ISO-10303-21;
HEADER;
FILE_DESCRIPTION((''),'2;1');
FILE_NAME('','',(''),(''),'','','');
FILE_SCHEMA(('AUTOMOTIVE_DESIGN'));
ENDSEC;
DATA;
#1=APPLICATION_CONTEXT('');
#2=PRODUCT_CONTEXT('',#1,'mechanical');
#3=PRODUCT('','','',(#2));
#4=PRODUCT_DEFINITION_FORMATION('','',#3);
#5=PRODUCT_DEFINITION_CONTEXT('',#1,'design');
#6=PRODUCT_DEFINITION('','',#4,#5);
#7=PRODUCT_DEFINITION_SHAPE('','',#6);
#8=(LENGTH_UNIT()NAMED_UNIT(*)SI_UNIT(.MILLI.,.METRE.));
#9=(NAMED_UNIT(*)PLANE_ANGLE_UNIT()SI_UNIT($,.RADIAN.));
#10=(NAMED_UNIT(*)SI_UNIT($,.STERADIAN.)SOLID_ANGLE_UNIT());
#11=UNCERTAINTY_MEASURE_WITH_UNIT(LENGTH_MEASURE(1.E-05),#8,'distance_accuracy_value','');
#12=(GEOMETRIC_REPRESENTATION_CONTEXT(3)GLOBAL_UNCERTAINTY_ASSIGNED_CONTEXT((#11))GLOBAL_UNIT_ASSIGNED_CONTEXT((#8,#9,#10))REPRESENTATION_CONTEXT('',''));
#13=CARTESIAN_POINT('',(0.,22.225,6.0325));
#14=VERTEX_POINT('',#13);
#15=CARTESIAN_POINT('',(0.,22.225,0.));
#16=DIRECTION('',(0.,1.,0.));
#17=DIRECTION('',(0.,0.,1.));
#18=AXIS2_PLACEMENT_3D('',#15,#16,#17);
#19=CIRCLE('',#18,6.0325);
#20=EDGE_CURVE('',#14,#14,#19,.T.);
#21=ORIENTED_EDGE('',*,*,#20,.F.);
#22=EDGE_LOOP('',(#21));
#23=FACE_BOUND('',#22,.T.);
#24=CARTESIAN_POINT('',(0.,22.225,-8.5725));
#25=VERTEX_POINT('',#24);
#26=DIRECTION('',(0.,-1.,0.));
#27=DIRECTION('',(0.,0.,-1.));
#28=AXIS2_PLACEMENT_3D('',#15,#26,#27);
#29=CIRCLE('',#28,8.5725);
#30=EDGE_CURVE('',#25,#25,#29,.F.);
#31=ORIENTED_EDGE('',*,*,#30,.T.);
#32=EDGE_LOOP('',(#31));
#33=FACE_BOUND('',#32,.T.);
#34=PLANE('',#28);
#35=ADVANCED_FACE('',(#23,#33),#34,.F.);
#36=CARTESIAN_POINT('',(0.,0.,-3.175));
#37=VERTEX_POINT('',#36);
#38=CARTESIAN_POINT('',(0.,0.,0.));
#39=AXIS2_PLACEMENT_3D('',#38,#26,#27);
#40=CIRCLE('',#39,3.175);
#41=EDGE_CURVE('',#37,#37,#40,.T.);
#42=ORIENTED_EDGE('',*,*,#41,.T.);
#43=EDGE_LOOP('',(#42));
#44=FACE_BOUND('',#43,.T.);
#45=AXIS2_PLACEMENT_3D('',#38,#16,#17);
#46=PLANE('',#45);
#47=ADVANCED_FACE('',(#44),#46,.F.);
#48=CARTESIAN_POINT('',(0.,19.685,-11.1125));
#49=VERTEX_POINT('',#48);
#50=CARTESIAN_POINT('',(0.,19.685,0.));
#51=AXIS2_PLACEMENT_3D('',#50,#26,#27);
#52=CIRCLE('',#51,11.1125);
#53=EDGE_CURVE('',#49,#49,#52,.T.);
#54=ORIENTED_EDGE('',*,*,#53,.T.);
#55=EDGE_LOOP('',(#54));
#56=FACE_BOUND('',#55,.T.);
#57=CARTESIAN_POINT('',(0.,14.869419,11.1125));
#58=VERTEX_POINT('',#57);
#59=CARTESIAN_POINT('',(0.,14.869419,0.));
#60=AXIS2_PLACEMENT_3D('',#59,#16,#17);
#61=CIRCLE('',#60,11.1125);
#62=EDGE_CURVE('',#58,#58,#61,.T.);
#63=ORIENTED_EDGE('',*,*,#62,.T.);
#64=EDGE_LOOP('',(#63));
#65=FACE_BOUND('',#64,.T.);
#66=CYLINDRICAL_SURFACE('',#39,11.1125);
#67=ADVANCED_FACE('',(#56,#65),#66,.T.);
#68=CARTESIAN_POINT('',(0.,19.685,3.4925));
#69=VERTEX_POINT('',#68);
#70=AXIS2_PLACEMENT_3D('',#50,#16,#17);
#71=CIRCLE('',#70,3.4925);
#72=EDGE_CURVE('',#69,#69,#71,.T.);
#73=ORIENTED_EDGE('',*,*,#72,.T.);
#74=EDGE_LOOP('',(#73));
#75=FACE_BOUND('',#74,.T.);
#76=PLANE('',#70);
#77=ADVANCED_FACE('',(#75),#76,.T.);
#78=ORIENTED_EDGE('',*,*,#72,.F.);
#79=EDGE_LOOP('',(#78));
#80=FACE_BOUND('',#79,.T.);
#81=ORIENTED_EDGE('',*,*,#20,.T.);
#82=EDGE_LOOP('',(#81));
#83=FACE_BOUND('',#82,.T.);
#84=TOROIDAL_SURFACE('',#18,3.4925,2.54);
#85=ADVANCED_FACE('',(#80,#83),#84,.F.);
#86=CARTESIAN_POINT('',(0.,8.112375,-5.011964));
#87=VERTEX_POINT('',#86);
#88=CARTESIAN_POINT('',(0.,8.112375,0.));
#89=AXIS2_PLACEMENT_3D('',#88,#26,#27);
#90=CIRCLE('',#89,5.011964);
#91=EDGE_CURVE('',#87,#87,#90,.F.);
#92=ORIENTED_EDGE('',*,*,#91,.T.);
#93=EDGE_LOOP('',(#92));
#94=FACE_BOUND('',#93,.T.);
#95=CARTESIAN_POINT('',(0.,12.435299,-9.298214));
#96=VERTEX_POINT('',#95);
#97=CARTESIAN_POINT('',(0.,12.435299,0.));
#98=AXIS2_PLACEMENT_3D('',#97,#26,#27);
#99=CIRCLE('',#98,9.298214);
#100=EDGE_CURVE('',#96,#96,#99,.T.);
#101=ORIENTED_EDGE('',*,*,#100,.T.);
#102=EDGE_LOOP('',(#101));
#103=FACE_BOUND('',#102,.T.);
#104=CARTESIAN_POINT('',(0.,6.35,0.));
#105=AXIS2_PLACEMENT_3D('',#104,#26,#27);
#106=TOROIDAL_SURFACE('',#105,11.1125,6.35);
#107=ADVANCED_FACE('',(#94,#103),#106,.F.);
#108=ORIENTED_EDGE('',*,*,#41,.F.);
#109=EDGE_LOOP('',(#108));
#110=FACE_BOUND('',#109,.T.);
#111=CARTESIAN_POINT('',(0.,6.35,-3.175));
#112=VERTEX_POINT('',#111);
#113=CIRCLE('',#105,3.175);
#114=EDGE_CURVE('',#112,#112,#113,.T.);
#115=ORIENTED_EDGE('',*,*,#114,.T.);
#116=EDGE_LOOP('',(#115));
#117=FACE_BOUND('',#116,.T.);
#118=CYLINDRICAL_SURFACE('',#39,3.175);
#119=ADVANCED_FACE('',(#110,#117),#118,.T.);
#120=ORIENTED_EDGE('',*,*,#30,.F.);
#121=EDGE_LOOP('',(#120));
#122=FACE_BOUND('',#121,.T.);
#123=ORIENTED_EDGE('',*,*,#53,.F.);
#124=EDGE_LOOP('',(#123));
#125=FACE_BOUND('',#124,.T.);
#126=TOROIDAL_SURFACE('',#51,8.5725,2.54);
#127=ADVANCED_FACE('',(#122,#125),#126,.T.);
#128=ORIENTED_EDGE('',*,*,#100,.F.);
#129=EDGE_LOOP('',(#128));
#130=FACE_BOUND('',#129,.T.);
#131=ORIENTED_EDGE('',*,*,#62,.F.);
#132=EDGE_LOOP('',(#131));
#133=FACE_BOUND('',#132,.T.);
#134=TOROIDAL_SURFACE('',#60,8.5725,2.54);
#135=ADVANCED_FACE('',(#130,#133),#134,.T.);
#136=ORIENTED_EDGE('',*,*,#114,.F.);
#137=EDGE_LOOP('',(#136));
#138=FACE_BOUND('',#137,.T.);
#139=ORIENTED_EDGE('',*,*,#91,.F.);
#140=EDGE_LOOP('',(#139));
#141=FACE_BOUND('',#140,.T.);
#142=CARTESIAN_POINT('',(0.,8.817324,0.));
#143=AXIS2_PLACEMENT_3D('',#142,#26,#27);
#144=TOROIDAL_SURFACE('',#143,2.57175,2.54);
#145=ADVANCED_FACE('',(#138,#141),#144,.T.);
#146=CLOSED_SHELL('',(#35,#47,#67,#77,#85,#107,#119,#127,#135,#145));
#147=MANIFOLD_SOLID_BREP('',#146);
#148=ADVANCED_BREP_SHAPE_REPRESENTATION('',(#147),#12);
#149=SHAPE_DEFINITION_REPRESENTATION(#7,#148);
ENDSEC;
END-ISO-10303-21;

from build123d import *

# Parameters (mm, degrees)
FILLET1_R          = 2.54
SKETCH2_R          = 6.0325
CUT_EXTRUDE1_DEPTH = 2.54
FILLET2_R          = 2.54


# Some blends are built 0.0001 mm under size
with BuildPart() as part:
    # Sketch1 → Base-Revolve (revolve)
    with BuildSketch(Plane.XY, mode=Mode.PRIVATE) as base_revolve_sk:
        with BuildLine():
            ThreePointArc((11.1125, 12.7), (6.622371939, 10.840128061), (4.7625, 6.35))
            Line((4.7625, 6.35), (3.175, 6.35))
            Line((3.175, 6.35), (3.175, 0))
            Line((3.175, 0), (0, 0))
            Line((0, 0), (0, 22.225))
            Line((0, 22.225), (11.1125, 22.225))
            Line((11.1125, 22.225), (11.1125, 12.7))
        make_face()
    revolve(base_revolve_sk.sketch.rotate(Axis((0, 0, 0), (0, 1, 0)), 90), axis=Axis((0, 0, 0), (0, 1, 0)))

    # Fillet1
    # the kernel refuses this fillet: 2.54 mm, written as the material it takes off along each edge
    with BuildSketch(Plane(origin=(0, 6.35, 0), x_dir=(0, 0, -1), z_dir=(1, 0, 0))) as fillet1_piece_1:
        with BuildLine():
            CenterArc((2.57175, 2.467324348), FILLET1_R, 283.739035174, 60.14756783)
            Line((3.175, 0), (3.187065, -0.049346487))
            ThreePointArc((3.187065, -0.049346487), (3.96875, -0.0508), (4.7625, -0.0508))
            Line((4.7625, -0.0508), (4.8133, 0))
            ThreePointArc((4.8133, 0), (4.875473976, 0.882851637), (5.060768571, 1.748275538))
            Line((5.060768571, 1.748275538), (5.011964286, 1.762374534))
        make_face()
    revolve(axis=Axis((0, 6.35, 0), (0, 1, 0)), mode=Mode.SUBTRACT)
    with BuildSketch(Plane(origin=(0, 22.225, 0), x_dir=(0, 0, -1), z_dir=(1, 0, 0))) as fillet1_piece_2:
        with BuildLine():
            CenterArc((11.1125 - FILLET1_R, -FILLET1_R), FILLET1_R, 0, 90)
            Line((11.1125, -FILLET1_R), (11.1125 + FILLET1_R * 0.02, -FILLET1_R))
            Line((11.1125 + FILLET1_R * 0.02, -FILLET1_R), (11.1125 + FILLET1_R * 0.02, FILLET1_R * 0.02))
            Line((11.1125 + FILLET1_R * 0.02, FILLET1_R * 0.02), (11.1125 - FILLET1_R, FILLET1_R * 0.02))
            Line((11.1125 - FILLET1_R, FILLET1_R * 0.02), (11.1125 - FILLET1_R, 0))
        make_face()
    revolve(axis=Axis((0, 22.225, 0), (0, 1, 0)), mode=Mode.SUBTRACT)
    with BuildSketch(Plane(origin=(0, 12.7, 0), x_dir=(0, 0, -1), z_dir=(1, 0, 0))) as fillet1_piece_3:
        with BuildLine():
            CenterArc((8.5725, 2.169418994), FILLET1_R, 286.601549599, 73.398450401)
            Line((11.1125, 2.169418994), (11.1633, 2.169418994))
            Line((11.1633, 2.169418994), (11.1633, 0))
            Line((11.1633, 0), (11.1125, -0.0508))
            ThreePointArc((11.1125, -0.0508), (10.203087128, -0.116791447), (9.312728571, -0.313383113))
            Line((9.312728571, -0.313383113), (9.298214286, -0.264700718))
        make_face()
    revolve(axis=Axis((0, 12.7, 0), (0, 1, 0)), mode=Mode.SUBTRACT)

    # Sketch2 → Cut-Extrude1 (cut)
    with BuildSketch(Plane(origin=(0, 22.225, 0), x_dir=(1, 0, 0), z_dir=(0, 1, 0))):
        with Locations(Location((0, 0, 0), (0, 0, 270))):
            Circle(SKETCH2_R)
    extrude(amount=-CUT_EXTRUDE1_DEPTH, mode=Mode.SUBTRACT)

    # Fillet2
    fillet2_edges = [part.edges().sort_by_distance(p)[0] for p in [
        (0, 19.685, -6.0325),
    ]]
    fillet(fillet2_edges, radius=FILLET2_R - 0.0001)  # a hair under: the kernel refuses the full size


solid = part.part
